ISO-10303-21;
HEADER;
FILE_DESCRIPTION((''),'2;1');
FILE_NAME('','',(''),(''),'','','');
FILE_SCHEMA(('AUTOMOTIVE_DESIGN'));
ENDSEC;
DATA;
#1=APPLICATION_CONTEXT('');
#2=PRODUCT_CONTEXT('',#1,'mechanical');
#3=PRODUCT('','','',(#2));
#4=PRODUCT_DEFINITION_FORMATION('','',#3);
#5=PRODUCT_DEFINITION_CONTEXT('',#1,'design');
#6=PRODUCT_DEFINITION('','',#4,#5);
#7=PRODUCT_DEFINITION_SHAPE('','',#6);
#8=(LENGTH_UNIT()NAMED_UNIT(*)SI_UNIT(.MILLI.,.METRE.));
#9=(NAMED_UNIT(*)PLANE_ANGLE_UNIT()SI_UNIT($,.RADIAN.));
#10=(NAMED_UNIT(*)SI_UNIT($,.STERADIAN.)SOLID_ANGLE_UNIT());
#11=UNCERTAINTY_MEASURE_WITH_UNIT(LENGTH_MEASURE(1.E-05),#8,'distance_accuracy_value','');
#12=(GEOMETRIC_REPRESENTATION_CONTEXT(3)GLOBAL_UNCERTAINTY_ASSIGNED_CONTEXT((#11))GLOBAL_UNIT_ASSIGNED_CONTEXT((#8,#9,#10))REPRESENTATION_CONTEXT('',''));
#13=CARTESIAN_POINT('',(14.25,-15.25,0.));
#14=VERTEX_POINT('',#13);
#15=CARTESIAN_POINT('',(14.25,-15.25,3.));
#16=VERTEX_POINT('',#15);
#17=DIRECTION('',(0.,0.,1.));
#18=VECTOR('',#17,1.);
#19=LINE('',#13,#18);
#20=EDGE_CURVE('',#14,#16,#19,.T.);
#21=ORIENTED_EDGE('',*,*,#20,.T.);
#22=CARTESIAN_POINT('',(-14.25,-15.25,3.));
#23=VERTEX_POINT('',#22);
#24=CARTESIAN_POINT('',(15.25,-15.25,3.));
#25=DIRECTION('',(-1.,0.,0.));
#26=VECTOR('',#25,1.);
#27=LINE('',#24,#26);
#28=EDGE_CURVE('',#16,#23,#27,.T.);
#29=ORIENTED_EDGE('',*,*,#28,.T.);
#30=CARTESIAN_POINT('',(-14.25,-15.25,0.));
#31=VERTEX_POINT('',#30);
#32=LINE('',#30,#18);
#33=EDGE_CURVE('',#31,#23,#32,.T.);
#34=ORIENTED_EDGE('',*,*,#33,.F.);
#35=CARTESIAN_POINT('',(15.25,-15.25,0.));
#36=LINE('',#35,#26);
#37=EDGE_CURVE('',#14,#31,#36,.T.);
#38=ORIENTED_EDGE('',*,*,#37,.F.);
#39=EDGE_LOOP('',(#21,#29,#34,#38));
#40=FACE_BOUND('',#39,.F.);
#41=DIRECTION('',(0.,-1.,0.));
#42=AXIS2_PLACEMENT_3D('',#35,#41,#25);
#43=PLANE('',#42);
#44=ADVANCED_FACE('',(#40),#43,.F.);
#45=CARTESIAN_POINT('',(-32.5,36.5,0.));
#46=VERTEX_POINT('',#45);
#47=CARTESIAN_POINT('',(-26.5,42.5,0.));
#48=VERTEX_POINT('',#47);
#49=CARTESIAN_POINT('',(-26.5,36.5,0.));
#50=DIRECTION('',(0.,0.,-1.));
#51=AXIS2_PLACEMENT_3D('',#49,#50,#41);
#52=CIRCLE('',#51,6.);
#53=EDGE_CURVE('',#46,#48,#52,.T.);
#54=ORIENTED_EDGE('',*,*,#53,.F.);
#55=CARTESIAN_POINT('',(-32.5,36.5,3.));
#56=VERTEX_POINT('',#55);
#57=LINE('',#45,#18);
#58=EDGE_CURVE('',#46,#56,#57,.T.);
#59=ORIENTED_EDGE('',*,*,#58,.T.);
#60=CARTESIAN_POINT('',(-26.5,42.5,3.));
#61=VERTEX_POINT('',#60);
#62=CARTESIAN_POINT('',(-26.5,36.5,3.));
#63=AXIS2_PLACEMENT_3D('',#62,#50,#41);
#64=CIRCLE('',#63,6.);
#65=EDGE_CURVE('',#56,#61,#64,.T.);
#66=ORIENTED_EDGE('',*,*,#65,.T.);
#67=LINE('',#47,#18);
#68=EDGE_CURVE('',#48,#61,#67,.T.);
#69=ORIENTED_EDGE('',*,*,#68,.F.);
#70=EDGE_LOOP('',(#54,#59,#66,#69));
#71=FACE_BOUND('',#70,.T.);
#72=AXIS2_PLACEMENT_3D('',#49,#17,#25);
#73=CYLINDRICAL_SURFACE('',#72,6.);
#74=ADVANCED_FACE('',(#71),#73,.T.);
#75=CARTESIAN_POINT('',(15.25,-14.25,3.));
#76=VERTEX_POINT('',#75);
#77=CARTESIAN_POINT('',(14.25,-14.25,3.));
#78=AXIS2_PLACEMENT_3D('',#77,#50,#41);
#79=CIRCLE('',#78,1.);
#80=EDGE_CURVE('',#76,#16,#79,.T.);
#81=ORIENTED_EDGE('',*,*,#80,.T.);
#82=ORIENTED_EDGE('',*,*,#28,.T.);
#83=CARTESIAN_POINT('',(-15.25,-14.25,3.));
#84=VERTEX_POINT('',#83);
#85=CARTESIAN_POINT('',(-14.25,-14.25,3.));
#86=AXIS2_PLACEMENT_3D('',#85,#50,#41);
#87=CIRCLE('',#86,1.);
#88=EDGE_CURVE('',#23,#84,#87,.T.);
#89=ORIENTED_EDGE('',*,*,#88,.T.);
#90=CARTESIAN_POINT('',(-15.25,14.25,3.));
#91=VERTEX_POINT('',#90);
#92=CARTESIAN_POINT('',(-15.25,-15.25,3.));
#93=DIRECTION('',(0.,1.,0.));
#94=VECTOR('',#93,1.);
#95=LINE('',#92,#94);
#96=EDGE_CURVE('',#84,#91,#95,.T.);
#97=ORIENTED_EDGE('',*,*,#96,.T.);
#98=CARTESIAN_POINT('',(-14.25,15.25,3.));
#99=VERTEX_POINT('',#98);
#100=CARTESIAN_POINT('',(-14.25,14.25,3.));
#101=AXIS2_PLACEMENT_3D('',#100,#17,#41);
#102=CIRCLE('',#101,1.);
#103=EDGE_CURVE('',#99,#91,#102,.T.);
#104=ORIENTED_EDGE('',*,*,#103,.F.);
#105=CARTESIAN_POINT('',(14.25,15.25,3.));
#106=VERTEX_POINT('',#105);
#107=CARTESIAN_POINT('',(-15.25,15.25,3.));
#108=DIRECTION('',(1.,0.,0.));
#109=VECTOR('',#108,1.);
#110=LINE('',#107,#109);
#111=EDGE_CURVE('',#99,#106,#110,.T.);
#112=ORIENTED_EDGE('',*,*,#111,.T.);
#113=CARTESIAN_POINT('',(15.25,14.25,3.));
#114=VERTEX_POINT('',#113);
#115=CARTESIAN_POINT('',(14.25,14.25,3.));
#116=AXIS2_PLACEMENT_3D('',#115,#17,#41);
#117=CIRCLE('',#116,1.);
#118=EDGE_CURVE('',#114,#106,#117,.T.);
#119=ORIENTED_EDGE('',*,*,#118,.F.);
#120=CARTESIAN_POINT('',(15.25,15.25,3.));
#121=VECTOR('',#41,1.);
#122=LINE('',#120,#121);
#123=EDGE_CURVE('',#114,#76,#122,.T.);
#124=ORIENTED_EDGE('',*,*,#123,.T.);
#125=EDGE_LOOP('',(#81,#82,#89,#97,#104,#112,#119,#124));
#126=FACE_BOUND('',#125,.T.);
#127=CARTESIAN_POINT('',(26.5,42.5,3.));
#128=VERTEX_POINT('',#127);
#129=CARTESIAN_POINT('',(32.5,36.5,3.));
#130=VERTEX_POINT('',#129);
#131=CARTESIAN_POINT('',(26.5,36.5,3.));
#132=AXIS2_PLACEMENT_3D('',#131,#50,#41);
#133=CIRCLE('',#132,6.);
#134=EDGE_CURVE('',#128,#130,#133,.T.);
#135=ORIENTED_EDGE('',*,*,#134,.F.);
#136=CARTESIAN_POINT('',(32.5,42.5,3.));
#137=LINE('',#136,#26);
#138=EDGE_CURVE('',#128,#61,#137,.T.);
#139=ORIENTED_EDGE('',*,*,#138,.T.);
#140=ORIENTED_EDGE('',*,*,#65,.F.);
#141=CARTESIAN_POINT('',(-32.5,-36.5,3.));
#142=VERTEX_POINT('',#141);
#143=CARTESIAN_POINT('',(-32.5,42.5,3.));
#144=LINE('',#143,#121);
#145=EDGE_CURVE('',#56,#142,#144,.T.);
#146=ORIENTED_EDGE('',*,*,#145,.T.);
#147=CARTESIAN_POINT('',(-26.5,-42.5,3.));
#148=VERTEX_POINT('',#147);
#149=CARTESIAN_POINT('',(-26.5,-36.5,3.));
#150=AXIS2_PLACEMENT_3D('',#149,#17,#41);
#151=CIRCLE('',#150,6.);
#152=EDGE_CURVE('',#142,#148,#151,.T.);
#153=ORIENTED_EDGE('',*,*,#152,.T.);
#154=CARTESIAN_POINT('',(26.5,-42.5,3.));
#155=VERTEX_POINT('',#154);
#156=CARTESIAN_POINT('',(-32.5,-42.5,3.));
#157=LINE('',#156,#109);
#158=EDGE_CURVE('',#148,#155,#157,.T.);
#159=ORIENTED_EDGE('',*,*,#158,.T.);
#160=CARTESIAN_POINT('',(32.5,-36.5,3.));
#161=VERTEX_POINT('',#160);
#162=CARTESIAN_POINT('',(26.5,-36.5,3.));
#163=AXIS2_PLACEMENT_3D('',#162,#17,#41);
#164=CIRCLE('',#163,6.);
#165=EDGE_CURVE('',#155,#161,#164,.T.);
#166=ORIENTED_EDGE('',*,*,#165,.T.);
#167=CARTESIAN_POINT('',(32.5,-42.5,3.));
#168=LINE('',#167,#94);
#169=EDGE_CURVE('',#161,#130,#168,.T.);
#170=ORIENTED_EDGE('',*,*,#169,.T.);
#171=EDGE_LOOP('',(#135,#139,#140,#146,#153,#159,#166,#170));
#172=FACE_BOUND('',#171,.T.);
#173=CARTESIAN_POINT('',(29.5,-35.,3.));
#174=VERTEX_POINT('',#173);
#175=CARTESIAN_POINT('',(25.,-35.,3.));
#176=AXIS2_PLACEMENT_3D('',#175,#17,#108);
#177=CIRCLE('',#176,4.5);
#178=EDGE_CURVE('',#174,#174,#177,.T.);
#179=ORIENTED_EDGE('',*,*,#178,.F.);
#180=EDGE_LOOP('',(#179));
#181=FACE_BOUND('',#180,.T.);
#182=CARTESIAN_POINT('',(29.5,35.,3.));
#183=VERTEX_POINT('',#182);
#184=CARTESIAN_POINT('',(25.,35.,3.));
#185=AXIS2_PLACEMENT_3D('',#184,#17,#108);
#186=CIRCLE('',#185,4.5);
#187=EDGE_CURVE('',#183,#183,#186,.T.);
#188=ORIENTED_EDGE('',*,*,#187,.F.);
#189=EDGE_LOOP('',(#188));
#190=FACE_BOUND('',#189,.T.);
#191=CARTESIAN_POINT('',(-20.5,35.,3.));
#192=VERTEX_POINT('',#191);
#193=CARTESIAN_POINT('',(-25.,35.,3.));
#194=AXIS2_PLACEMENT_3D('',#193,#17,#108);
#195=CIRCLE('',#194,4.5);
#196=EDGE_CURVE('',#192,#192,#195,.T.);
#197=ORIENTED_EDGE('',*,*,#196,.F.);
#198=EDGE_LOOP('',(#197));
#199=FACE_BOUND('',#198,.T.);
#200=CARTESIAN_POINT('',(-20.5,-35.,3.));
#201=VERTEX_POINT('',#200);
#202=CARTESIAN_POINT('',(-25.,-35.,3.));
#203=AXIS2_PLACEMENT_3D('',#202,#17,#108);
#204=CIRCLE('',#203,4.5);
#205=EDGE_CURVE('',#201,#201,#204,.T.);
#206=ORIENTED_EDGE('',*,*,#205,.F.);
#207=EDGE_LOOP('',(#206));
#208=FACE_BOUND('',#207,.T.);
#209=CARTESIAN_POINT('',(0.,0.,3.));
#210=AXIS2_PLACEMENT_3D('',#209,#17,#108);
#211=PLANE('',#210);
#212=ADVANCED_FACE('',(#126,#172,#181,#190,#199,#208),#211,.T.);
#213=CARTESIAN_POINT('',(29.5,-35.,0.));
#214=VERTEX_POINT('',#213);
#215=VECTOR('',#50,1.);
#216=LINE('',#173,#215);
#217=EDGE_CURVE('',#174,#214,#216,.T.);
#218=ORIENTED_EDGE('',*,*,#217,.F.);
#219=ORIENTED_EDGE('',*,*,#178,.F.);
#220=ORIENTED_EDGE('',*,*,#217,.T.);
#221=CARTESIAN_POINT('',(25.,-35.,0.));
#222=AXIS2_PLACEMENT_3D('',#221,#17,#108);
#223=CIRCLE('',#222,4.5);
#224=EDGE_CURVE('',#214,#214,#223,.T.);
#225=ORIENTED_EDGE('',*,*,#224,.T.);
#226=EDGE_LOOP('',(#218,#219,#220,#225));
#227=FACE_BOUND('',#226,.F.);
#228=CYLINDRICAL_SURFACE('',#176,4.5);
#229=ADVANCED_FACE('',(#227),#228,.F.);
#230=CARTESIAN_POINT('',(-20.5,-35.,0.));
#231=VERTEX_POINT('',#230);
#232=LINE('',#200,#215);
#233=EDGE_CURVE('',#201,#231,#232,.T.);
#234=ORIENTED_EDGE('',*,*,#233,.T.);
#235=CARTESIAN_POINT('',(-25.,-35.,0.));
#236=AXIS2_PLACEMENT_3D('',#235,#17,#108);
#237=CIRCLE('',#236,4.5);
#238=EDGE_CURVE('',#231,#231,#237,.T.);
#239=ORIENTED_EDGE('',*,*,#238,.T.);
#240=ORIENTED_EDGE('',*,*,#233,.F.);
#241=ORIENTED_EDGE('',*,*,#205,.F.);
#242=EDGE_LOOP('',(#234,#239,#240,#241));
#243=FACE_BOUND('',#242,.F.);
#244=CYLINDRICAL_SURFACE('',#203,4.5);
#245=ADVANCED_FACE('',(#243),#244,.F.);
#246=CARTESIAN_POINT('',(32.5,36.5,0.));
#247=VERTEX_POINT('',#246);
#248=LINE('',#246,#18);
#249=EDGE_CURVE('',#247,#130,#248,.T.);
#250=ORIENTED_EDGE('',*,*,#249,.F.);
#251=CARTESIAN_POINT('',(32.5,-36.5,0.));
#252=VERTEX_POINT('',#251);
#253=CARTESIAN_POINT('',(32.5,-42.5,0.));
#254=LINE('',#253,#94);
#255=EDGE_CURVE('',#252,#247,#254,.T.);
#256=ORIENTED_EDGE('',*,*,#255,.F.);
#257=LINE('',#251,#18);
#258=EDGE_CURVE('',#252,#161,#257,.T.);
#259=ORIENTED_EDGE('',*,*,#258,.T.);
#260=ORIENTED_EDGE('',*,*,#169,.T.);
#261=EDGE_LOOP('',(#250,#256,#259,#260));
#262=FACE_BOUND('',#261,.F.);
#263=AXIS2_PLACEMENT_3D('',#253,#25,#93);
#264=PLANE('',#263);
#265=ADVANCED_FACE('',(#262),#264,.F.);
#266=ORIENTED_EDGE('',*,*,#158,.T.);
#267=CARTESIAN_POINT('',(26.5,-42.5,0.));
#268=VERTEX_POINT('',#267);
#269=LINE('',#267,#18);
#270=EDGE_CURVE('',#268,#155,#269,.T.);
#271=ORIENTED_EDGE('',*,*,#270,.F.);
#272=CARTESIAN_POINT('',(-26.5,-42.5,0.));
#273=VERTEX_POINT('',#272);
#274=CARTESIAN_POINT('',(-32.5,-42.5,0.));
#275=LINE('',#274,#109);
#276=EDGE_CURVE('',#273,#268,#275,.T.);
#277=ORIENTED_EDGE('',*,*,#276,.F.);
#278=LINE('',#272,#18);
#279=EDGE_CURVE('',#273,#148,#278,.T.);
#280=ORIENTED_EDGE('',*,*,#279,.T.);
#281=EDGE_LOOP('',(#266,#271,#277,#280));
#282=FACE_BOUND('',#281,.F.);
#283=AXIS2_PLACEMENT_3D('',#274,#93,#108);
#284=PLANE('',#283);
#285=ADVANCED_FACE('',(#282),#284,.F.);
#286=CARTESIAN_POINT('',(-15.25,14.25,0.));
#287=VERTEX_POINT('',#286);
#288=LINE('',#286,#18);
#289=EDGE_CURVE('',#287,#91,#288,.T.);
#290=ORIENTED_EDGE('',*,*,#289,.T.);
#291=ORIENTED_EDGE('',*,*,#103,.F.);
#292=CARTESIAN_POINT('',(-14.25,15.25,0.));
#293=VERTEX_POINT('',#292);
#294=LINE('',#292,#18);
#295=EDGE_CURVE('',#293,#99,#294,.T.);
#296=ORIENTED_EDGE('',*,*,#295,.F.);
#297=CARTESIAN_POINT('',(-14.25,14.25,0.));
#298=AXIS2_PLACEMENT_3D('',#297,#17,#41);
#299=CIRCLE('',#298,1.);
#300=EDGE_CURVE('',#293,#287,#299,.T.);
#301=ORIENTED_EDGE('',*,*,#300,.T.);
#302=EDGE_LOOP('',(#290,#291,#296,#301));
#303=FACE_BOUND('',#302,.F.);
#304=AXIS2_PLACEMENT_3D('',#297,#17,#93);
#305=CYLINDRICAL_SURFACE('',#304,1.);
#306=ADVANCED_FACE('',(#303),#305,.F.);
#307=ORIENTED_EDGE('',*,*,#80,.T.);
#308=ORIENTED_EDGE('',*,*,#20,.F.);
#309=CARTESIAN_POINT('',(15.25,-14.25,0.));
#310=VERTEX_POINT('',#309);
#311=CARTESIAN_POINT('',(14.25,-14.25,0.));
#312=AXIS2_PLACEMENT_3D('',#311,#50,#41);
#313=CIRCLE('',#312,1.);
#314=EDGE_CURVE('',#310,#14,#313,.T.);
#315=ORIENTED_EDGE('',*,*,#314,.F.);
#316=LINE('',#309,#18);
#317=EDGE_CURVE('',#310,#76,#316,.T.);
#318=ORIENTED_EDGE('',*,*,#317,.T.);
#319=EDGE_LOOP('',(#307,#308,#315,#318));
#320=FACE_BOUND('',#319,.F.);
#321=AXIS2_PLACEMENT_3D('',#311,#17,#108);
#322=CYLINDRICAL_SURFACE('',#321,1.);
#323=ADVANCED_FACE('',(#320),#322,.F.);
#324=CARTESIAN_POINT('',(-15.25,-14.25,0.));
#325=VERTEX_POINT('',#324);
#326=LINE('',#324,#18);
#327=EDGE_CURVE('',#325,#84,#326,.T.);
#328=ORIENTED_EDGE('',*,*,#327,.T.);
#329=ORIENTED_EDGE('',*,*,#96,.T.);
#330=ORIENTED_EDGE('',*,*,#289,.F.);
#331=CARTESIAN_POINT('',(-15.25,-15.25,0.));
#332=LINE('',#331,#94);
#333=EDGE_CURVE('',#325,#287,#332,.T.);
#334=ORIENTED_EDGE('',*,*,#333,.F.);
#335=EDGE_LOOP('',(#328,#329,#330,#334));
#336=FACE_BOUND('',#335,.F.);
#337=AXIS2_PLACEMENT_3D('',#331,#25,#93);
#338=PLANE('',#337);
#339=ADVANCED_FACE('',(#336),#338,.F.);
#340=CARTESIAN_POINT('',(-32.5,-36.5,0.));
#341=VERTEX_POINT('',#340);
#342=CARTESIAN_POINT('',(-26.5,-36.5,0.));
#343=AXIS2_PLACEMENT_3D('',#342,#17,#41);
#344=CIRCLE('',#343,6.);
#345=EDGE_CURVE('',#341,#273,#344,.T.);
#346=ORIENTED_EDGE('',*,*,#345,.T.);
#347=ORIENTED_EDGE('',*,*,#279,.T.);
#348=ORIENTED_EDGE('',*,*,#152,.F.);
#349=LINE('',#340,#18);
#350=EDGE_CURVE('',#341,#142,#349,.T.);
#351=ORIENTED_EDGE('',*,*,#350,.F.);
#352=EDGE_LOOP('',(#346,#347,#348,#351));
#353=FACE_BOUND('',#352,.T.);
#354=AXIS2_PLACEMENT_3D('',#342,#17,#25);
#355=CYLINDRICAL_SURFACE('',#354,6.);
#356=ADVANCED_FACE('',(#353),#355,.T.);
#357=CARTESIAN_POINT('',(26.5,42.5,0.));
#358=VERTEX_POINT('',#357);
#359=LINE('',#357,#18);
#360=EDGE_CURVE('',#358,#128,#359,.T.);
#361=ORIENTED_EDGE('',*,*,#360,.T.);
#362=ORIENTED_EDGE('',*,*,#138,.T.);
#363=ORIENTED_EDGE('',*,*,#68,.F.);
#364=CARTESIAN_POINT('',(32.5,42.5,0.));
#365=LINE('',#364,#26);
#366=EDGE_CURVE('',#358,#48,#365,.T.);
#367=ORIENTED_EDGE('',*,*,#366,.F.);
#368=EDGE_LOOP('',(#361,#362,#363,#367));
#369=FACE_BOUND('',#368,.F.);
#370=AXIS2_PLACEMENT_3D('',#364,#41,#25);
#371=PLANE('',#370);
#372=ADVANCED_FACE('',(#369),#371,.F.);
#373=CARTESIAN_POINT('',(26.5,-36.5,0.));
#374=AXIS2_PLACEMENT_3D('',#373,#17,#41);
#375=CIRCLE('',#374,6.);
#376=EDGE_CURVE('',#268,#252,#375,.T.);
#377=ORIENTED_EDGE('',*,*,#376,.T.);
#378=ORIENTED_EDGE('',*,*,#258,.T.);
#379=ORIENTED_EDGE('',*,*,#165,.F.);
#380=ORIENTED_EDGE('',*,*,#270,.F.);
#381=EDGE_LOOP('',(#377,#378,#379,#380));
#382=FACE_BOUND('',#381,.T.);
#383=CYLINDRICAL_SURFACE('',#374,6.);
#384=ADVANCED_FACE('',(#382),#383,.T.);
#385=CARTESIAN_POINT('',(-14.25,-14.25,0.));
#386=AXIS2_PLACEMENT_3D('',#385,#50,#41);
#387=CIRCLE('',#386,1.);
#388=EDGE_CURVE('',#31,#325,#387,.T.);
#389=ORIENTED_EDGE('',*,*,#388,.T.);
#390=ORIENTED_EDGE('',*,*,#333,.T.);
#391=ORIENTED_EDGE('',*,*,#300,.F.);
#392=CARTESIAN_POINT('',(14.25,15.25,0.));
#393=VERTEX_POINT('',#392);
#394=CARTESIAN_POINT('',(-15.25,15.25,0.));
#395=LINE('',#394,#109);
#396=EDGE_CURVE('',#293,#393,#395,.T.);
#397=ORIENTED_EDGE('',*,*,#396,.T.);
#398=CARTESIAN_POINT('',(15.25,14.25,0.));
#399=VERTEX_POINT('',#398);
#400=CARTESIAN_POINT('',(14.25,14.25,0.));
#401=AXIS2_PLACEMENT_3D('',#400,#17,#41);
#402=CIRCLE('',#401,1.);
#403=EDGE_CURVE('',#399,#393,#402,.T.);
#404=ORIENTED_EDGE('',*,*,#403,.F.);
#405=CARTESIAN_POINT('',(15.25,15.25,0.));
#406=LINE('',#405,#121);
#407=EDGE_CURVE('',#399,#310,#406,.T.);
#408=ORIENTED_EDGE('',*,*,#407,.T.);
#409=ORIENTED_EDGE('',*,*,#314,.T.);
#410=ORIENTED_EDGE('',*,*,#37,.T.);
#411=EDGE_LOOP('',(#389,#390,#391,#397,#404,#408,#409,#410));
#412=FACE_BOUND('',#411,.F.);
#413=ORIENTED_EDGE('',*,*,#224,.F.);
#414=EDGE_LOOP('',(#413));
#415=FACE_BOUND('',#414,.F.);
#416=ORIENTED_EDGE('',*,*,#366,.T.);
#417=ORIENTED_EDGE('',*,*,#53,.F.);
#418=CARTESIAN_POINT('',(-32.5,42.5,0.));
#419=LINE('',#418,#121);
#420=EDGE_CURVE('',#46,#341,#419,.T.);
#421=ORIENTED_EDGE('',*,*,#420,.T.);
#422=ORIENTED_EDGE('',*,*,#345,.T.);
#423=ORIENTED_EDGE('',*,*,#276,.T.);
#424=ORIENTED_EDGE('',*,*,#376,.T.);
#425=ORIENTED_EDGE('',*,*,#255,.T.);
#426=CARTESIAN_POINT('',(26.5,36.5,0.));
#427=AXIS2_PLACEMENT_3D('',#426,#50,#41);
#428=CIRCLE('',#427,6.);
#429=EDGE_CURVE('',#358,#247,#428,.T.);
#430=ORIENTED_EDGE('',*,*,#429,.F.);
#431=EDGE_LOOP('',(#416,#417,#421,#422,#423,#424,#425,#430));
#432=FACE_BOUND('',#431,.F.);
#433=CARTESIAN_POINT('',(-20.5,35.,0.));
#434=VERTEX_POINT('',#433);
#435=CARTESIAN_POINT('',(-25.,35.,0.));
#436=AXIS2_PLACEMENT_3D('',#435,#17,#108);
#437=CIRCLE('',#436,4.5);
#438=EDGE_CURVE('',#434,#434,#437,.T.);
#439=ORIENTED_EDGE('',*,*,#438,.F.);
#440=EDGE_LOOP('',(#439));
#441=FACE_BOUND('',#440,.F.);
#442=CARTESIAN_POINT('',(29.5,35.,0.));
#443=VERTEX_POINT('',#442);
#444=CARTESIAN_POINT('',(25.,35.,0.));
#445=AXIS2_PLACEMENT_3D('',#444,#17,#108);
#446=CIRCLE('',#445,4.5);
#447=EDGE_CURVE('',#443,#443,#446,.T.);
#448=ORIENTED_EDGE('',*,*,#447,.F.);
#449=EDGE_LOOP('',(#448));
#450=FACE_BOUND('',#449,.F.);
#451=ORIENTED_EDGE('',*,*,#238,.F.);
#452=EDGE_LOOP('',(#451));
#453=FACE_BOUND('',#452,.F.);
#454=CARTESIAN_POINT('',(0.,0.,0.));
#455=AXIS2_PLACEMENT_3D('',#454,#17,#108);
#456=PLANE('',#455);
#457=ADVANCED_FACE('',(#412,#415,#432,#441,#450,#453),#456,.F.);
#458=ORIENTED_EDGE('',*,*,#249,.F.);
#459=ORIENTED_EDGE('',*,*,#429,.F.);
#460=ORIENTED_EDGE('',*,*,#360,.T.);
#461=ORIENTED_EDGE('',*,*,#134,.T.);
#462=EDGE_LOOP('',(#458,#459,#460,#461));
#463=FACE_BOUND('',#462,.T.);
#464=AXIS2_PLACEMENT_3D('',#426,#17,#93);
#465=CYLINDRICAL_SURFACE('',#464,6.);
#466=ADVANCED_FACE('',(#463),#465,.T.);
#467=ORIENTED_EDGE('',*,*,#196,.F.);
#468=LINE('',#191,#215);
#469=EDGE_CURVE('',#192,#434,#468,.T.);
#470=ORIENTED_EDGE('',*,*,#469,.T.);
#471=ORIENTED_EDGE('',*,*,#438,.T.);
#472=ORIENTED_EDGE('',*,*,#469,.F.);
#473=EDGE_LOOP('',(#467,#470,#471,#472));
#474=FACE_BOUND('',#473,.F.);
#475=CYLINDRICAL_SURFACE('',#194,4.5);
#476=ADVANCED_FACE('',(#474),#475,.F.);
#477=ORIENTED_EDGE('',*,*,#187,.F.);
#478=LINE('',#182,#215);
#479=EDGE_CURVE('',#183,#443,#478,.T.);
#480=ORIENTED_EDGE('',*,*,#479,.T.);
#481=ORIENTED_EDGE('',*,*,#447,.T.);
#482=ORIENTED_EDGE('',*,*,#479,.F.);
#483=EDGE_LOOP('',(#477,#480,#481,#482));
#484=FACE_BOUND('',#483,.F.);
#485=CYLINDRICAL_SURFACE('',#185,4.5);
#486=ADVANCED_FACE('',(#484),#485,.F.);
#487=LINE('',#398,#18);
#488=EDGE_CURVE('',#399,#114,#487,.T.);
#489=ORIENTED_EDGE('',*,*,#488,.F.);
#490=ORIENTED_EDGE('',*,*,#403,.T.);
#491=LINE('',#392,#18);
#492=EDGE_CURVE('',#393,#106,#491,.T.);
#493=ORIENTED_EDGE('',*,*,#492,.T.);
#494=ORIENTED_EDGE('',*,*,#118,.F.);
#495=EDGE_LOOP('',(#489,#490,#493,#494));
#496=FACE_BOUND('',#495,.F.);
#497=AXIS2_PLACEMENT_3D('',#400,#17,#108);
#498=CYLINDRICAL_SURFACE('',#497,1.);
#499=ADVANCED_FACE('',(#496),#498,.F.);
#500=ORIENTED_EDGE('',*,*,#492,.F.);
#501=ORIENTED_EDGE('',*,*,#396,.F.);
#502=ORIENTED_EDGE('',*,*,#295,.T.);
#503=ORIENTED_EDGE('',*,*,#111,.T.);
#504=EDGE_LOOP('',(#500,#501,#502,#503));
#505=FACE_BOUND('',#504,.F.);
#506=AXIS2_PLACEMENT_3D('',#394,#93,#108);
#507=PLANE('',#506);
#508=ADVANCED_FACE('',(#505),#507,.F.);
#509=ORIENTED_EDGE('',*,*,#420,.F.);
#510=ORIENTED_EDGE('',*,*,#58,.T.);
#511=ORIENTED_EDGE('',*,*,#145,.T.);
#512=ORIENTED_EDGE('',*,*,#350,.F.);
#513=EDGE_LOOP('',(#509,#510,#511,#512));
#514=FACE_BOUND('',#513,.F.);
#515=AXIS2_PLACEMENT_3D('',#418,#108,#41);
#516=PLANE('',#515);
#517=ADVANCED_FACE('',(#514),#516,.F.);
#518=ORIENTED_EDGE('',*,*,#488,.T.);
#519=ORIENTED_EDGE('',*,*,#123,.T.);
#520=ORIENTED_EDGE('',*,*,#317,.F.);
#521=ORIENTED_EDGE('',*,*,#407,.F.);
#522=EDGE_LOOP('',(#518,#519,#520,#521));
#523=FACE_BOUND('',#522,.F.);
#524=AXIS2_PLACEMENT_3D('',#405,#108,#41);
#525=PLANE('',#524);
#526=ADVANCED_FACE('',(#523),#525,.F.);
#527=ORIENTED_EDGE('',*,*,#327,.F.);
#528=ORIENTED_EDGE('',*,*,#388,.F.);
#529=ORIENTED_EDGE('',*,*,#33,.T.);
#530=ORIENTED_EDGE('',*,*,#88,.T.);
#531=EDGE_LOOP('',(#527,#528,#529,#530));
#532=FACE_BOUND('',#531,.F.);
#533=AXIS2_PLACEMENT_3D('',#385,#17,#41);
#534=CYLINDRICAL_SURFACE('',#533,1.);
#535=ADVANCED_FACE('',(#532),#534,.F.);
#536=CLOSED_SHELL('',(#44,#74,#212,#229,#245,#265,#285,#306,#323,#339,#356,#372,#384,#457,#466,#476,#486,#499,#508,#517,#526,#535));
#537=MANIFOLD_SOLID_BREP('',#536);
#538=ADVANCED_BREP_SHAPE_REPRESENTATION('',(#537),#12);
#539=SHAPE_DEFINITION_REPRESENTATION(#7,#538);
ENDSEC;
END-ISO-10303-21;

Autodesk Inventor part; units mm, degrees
ref_plane "YZ Plane" through (0, 0, 0) normal (1, 0, 0) x (0, 1, 0)
ref_plane "XZ Plane" through (0, 0, 0) normal (0, 1, 0) x (-1, 0, 0)
ref_plane "XY Plane" through (0, 0, 0) normal (0, 0, 1) x (1, 0, 0)
sketch "Sketch1" plane through (0, 0, 0) normal (0, 0, 1) x (1, 0, 0)
  line L0 (-32.5, -42.5) -> (32.5, -42.5)
  line L1 (32.5, -42.5) -> (32.5, 42.5)
  line L2 (32.5, 42.5) -> (-32.5, 42.5)
  line L3 (-32.5, 42.5) -> (-32.5, -42.5)
  line L4 (-32.5, -42.5) -> (32.5, 42.5) construction
  line L5 (32.5, -42.5) -> (-32.5, 42.5) construction
  line L6 (15.25, -15.25) -> (-15.25, -15.25)
  line L7 (-15.25, -15.25) -> (-15.25, 15.25)
  line L8 (-15.25, 15.25) -> (15.25, 15.25)
  line L9 (15.25, 15.25) -> (15.25, -15.25)
  line L10 (15.25, -15.25) -> (-15.25, 15.25) construction
  line L11 (-15.25, -15.25) -> (15.25, 15.25) construction
  point P0 (0, 0)
  dimension "d154" = 65
  dimension "d155" = 85
  dimension "d172" = 30.5
extrude "Plate5" add sketch "Sketch1" along normal blind 3
sketch "Sketch9" plane through (0, 0, 3) normal (0, 0, 1) x (1, 0, 0)
  circle A0 centre (25, -35) radius 4.5
  line L0 (25, 35) -> (-25, 35) construction
  line L1 (-25, 35) -> (-25, -35) construction
  line L2 (-25, -35) -> (25, -35) construction
  line L3 (25, -35) -> (25, 35) construction
  line L4 (25, 35) -> (-25, -35) construction
  line L5 (-25, 35) -> (25, -35) construction
  circle A1 centre (-25, -35) radius 4.5
  circle A2 centre (25, 35) radius 4.5
  circle A3 centre (-25, 35) radius 4.5
  point P0 (0, 0)
  dimension "d173" = 70
  dimension "d174" = 9
  dimension "d175" = 50
extrude "Cut2" cut sketch "Sketch9" against normal blind 3
fillet "Corner Round1" radius 6 4 edges at (32.5, 42.5, 1.5) (-32.5, 42.5, 1.5) (-32.5, -42.5, 1.5) (32.5, -42.5, 1.5)
fillet "Corner Round2" radius 1 4 edges at (-15.25, 15.25, 1.5) (-15.25, -15.25, 1.5) (15.25, -15.25, 1.5) (15.25, 15.25, 1.5)
properties part number "PNS 760 FDS 1200 FLANGE 3" material "Stainless Steel"
